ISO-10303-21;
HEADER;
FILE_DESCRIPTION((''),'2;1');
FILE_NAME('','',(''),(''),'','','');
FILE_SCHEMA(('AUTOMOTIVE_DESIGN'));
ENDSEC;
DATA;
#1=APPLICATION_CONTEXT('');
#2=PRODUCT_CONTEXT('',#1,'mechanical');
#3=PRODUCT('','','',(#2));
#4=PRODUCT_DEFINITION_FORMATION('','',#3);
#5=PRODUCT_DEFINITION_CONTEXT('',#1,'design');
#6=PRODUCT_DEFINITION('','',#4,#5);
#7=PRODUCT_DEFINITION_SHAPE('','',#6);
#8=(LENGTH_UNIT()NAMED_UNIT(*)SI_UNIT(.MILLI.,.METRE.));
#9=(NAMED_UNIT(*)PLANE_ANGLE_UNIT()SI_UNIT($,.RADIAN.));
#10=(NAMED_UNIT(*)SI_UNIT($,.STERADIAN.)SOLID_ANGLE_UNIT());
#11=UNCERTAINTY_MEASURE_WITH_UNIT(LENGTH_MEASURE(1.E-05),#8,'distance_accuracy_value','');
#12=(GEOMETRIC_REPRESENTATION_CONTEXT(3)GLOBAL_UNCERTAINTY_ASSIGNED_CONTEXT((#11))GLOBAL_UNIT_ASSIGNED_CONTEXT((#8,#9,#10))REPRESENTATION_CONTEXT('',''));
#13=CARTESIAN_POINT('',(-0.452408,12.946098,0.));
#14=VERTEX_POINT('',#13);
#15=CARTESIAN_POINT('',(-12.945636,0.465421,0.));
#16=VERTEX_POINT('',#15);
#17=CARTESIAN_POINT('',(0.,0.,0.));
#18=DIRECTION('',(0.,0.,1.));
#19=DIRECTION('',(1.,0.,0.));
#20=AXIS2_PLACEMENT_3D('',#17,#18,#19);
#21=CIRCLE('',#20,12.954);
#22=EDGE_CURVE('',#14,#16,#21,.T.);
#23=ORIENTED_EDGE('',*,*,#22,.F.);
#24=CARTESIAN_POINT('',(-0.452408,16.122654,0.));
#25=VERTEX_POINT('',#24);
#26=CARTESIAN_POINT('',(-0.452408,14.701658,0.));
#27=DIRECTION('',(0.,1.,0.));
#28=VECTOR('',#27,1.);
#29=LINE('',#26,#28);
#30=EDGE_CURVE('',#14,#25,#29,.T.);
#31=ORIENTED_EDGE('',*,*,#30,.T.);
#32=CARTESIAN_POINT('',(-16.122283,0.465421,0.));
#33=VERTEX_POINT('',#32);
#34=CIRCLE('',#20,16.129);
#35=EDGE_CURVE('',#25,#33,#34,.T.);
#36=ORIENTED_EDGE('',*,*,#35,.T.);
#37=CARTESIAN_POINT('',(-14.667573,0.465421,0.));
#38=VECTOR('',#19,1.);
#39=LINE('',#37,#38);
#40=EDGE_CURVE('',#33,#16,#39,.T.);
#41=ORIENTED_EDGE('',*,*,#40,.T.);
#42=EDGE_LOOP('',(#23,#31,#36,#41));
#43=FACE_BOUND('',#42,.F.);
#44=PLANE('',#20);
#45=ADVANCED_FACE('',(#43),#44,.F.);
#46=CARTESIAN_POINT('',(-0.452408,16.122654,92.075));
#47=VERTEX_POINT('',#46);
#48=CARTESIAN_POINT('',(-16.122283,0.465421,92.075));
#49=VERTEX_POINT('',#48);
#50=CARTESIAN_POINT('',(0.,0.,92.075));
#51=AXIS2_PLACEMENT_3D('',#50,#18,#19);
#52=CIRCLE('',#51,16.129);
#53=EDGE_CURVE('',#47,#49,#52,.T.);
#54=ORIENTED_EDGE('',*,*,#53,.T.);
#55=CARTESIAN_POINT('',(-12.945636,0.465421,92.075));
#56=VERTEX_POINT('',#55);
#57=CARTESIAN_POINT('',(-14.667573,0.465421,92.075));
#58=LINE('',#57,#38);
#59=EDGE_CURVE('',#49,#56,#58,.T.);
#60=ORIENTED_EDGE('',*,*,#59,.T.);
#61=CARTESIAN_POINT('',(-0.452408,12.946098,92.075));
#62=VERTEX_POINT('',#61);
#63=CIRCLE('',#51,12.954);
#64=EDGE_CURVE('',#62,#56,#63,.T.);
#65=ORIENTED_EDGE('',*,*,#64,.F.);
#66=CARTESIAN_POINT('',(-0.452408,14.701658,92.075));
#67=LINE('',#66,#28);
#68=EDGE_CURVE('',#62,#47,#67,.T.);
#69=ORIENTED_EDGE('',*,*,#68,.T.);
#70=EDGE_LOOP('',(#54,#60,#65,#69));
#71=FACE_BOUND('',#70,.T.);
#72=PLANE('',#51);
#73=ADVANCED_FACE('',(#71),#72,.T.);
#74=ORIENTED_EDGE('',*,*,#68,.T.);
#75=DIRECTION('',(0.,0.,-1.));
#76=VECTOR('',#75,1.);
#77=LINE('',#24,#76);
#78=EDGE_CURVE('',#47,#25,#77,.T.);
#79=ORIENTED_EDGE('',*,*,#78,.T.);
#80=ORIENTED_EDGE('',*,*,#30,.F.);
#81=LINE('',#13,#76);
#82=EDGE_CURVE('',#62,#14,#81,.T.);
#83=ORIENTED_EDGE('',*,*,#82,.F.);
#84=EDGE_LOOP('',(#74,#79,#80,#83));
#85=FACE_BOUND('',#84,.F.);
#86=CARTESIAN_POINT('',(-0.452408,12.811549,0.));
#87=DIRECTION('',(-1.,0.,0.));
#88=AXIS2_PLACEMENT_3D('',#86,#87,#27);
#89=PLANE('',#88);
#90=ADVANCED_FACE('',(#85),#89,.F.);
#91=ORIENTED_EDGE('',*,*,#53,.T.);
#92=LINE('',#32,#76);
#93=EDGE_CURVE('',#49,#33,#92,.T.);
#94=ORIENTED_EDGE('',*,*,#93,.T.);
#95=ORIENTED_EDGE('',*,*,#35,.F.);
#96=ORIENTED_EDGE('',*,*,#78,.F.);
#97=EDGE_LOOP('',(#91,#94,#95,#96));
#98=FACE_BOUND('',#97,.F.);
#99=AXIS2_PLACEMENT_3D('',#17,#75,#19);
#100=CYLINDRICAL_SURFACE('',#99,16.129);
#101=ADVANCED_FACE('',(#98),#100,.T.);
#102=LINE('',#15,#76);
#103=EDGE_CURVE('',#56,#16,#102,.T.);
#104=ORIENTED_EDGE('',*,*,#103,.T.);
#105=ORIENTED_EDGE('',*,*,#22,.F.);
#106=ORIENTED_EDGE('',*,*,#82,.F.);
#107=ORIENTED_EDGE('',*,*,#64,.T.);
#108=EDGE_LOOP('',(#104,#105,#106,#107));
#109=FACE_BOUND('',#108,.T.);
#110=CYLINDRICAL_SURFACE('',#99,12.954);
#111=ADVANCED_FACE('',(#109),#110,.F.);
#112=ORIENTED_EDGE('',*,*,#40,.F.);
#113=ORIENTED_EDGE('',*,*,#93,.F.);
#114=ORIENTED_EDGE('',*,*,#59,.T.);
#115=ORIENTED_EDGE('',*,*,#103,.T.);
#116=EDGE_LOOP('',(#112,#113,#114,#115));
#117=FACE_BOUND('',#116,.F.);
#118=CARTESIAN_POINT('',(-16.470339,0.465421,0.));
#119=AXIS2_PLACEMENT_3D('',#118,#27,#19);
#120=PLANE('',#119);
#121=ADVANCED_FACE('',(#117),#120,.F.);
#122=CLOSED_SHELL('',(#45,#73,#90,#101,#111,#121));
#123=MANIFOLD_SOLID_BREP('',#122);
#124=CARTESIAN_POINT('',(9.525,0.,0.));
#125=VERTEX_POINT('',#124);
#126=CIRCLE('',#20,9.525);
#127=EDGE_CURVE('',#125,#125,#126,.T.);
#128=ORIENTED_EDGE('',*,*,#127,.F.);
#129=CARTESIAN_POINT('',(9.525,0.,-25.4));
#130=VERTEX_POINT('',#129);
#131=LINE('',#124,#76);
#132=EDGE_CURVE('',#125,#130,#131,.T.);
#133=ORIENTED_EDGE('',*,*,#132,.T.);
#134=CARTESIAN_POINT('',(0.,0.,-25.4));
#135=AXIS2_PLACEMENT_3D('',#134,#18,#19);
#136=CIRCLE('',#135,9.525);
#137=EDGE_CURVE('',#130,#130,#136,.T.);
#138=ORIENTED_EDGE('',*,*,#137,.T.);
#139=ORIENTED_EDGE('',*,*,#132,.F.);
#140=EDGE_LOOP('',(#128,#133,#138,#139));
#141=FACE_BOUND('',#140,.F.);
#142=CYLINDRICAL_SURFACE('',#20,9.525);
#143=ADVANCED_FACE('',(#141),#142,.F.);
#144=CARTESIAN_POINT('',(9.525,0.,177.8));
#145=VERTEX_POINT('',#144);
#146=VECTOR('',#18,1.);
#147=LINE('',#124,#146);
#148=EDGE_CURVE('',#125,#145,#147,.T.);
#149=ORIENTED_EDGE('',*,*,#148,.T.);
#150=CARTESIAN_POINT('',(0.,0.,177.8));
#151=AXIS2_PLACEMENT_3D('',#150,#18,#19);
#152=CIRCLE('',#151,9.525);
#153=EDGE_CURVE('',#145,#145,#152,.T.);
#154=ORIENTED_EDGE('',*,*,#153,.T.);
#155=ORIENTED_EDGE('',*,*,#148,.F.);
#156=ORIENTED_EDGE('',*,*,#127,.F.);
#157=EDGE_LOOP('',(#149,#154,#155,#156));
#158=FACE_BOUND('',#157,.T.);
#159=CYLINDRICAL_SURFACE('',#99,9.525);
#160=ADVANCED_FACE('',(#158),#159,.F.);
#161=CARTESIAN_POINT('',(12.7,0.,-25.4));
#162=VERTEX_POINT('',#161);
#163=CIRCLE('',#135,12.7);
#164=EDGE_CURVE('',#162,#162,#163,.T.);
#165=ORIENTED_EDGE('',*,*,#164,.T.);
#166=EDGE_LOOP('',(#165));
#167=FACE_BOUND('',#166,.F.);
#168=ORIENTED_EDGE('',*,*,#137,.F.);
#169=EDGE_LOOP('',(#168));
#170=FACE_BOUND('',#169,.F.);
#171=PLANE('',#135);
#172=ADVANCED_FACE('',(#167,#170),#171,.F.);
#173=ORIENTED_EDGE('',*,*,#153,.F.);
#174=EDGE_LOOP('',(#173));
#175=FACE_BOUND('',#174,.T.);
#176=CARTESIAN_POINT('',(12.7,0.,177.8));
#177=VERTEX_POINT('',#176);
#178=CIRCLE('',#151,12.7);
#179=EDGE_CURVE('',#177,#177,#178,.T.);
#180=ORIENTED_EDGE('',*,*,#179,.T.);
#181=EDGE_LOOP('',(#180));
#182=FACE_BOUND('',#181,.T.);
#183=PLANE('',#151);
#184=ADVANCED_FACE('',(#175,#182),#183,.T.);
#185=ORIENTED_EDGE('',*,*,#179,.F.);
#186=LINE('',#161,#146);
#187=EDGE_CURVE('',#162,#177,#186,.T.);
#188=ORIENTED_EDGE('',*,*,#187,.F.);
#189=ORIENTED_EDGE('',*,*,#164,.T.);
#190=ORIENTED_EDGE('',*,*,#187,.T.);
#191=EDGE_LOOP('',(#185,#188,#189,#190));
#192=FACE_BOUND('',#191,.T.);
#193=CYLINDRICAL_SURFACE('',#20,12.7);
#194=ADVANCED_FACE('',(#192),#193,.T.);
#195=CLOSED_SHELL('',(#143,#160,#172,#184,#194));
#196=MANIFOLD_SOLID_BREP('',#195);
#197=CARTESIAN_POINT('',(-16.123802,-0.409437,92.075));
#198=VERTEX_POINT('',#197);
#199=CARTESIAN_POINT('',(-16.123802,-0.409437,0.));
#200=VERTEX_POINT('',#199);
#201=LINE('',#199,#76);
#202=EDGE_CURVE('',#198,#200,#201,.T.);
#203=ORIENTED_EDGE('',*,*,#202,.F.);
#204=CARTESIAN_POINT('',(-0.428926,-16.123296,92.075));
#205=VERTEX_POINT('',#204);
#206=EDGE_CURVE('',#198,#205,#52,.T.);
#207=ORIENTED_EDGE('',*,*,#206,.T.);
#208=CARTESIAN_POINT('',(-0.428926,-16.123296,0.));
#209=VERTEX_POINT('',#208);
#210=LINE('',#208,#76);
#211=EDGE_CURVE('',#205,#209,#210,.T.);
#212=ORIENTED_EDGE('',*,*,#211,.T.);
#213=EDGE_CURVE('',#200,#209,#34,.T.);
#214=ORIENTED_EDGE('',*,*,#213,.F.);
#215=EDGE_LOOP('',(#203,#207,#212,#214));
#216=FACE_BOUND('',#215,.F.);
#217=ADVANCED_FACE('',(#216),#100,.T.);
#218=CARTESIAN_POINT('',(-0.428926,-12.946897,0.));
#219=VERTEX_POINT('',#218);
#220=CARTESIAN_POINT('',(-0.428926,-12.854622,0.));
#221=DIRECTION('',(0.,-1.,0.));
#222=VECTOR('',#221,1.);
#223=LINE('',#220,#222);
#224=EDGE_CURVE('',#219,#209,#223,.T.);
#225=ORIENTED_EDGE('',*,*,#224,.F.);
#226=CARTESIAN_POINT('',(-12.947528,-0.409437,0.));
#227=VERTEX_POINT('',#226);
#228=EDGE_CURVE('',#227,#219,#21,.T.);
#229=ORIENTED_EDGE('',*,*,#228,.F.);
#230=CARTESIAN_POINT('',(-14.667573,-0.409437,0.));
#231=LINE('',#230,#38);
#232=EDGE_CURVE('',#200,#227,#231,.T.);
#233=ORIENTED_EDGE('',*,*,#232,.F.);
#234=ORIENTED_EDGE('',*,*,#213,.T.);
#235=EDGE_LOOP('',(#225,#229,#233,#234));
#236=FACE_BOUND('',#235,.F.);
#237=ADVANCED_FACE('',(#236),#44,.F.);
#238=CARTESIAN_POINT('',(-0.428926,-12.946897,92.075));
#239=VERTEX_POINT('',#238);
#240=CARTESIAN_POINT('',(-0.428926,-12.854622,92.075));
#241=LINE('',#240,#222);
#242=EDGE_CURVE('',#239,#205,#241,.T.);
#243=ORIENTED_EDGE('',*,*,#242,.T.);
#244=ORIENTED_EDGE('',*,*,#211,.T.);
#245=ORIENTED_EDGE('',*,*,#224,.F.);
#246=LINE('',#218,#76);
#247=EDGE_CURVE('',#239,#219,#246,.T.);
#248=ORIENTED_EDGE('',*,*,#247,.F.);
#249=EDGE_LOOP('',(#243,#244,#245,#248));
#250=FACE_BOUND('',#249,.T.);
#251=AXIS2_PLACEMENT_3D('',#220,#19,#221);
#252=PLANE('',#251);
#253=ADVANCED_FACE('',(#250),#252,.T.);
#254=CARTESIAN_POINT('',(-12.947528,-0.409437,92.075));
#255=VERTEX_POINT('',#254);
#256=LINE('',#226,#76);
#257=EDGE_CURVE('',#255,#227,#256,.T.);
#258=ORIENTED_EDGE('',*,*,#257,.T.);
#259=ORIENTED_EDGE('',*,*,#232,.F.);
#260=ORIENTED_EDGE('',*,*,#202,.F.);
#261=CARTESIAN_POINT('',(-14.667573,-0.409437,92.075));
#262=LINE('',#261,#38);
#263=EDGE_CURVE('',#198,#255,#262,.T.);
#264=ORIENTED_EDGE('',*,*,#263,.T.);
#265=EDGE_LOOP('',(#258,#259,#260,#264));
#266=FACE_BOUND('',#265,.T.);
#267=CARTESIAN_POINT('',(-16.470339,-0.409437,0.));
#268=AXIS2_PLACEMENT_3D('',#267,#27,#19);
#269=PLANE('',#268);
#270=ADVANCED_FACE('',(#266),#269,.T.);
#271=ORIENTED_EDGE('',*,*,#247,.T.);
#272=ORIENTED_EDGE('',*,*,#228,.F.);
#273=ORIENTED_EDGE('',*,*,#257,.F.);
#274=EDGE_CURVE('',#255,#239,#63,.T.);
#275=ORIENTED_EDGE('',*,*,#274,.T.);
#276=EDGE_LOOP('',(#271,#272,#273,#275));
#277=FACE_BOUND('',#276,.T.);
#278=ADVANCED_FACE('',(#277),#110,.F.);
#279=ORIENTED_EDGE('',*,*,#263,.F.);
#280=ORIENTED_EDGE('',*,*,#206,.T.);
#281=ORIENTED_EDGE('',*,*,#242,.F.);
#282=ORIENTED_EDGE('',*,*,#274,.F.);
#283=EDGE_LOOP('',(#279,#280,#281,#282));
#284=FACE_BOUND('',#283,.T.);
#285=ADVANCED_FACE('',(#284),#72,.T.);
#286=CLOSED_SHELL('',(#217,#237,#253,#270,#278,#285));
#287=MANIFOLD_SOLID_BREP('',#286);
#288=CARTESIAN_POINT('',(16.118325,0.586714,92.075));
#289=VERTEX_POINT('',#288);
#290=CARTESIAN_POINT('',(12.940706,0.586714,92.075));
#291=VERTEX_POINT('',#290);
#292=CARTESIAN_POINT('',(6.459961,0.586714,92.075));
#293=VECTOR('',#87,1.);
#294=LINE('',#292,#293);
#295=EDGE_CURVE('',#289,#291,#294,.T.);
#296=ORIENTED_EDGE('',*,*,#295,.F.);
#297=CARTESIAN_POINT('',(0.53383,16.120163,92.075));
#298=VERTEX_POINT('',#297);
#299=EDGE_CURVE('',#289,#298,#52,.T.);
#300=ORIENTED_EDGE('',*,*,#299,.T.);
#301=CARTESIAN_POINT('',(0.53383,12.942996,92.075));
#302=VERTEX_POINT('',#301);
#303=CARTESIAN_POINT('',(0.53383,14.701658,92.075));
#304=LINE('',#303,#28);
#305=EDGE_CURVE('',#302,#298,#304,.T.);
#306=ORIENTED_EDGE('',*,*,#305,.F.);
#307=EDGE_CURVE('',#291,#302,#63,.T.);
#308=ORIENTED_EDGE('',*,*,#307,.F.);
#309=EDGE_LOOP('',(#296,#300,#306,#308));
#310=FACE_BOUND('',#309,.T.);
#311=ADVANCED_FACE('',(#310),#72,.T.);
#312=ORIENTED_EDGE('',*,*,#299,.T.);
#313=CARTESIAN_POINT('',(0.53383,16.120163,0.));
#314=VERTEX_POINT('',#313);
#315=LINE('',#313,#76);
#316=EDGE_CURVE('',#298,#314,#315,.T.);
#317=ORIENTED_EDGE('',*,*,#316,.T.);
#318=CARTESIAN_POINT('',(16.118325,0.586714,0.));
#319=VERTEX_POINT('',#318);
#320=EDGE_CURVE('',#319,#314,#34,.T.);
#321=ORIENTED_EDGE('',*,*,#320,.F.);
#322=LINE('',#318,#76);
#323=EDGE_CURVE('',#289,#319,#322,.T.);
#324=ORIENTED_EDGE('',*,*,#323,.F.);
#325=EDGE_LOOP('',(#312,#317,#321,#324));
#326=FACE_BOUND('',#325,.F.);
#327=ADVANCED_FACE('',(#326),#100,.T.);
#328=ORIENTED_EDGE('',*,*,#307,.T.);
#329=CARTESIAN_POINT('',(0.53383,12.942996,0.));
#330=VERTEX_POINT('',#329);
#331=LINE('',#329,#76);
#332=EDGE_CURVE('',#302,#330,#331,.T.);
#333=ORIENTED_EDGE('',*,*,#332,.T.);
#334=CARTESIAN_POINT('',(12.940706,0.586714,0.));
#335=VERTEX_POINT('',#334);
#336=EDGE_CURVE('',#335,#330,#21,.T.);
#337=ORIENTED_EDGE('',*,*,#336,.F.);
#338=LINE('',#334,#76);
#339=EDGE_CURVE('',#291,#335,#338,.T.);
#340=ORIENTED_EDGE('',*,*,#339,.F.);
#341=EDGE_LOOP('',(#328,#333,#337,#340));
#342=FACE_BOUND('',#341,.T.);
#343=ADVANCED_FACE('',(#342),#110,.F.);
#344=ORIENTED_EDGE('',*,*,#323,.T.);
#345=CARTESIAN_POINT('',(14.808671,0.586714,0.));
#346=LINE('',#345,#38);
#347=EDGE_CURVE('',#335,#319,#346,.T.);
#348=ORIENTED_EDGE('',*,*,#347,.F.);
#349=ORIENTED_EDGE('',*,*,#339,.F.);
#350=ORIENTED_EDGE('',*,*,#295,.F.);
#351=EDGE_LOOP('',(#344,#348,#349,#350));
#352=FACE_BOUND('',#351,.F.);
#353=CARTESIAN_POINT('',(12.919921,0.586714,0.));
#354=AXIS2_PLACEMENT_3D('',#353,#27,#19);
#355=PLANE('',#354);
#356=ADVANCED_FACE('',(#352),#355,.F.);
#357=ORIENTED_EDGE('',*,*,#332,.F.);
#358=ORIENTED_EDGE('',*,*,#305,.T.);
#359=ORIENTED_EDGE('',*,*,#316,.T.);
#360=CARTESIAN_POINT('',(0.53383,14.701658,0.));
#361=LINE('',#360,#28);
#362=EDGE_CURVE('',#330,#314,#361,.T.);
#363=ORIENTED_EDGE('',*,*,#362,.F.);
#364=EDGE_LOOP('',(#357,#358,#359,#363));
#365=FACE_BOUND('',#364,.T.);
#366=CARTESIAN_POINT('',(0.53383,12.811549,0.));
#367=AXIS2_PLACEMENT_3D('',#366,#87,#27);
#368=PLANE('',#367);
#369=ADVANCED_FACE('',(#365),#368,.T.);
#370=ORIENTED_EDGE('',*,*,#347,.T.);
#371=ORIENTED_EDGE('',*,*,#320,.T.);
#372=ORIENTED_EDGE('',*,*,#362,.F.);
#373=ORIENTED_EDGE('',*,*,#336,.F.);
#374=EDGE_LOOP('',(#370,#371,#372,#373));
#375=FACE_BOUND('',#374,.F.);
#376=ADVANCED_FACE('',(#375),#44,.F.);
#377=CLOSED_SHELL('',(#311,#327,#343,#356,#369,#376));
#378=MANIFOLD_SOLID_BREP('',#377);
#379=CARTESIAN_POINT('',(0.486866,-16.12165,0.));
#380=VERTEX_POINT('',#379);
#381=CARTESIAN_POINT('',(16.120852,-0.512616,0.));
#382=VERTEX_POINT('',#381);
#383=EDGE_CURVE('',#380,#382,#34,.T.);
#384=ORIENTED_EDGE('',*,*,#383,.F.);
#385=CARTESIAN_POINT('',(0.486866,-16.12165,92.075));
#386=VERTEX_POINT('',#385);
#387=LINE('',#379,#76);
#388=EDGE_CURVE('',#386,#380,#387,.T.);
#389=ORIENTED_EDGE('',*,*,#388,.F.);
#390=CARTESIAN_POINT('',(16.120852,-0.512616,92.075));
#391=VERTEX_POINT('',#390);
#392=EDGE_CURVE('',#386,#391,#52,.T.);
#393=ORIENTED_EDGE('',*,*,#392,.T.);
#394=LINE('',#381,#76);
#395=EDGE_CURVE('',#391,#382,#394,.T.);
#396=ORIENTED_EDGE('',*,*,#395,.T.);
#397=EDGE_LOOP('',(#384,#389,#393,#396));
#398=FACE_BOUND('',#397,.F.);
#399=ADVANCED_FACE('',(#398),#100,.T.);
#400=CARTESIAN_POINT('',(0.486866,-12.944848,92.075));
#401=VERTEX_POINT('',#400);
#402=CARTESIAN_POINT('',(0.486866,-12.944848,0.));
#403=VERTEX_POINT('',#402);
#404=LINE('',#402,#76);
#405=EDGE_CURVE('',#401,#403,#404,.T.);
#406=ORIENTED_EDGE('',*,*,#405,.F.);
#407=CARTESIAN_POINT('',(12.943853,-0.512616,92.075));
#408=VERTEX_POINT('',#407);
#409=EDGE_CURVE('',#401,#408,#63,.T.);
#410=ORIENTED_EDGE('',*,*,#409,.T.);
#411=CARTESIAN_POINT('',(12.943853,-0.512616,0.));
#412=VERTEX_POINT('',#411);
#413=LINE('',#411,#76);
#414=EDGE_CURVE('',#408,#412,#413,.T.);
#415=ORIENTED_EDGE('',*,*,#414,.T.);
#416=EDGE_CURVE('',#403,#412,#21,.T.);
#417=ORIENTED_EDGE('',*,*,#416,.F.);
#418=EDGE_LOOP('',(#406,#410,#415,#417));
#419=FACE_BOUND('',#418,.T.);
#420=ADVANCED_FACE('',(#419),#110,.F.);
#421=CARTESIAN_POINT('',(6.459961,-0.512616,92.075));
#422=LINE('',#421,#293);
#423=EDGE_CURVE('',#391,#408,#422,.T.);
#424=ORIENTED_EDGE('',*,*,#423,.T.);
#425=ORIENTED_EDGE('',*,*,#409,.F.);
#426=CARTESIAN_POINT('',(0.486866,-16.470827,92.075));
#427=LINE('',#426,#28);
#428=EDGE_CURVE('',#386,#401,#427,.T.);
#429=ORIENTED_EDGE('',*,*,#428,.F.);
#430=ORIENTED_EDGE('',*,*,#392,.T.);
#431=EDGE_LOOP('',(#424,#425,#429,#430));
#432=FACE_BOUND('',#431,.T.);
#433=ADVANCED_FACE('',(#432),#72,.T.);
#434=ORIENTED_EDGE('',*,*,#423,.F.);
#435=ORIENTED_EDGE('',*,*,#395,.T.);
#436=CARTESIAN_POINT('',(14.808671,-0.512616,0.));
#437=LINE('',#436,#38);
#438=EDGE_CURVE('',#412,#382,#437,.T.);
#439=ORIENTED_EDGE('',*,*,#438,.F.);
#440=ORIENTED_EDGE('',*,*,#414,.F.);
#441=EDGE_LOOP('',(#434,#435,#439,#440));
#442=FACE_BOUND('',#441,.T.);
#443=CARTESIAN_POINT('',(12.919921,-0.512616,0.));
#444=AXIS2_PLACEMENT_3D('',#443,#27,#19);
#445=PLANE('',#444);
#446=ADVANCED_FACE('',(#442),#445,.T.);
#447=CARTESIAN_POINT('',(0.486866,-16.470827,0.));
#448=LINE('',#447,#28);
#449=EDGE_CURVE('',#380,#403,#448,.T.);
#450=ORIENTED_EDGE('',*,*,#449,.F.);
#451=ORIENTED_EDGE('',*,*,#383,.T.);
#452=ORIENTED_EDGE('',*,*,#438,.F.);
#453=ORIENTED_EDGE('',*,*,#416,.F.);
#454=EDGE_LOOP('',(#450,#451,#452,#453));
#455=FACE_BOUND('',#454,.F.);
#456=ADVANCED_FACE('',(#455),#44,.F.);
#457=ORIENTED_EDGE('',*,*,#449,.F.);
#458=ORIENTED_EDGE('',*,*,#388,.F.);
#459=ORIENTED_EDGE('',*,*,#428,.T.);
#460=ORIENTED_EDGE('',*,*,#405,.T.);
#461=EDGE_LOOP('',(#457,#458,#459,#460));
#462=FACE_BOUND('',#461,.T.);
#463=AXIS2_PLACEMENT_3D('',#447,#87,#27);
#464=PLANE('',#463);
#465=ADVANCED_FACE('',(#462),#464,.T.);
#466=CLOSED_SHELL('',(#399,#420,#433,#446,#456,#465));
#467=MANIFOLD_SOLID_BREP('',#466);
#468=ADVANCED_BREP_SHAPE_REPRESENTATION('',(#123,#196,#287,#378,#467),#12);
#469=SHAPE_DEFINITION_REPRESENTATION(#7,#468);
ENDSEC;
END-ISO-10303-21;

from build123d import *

# Parameters (mm, degrees)
F0_R     = 12.7
F0_R_2   = 9.525
F1_DEPTH = 177.8
F2_R     = 16.129
F2_R_2   = 12.954
F3_DEPTH = 92.075
F4_W     = 3.7774993107
F4_H     = 1.0993301403
F5_DEPTH = 177.801
F6_W     = 3.6055315286
F6_H     = 0.8748579712
F6_W_2   = 0.9862377919
F6_H_2   = 3.7802174482
F7_DEPTH = 92.075
F8_DEPTH = 25.4


# Not quite as in the source:
# - a feature names something its author has since deleted; it is built from what else it names


with BuildPart() as f1:
    # F0 (on Top) → F1 (new body)
    with BuildSketch(Plane.XY):
        Circle(F0_R)
        Circle(F0_R_2, mode=Mode.SUBTRACT)
    extrude(amount=F1_DEPTH)

    # F8 (add): a face of the model
    f8_faces = [f1.faces().sort_by_distance(p)[0] for p in [
        (-12.3407897552, 0, 0),
    ]]
    extrude(f8_faces, amount=F8_DEPTH)


with BuildPart() as f3:
    # F2 (on Top) → F3 (new body)
    with BuildSketch(Plane.XY):
        Circle(F2_R)
        Circle(F2_R_2, mode=Mode.SUBTRACT)
    extrude(amount=F3_DEPTH)

    # F4 (on Top) → F5 (cut, through all)
    with BuildSketch(Plane.XY):
        with Locations((14.8086710833, 0.0370488851)):
            Rectangle(F4_W, F4_H)
    extrude(amount=F5_DEPTH, mode=Mode.SUBTRACT)

    # F6 (on Top) → F7 (cut, through all)
    with BuildSketch(Plane.XY):
        with Locations((-14.6675733849, 0.0279923697)):
            Rectangle(F6_W, F6_H)
        Polygon((0.4868659598, -12.8129947375), (-0.4289262579, -12.8546217456), (-0.4289262579, -16.4708271623), (0.4868659598, -16.4708271623), align=None)
        with Locations((0.0407108382, 14.701657732)):
            Rectangle(F6_W_2, F6_H_2)
    extrude(amount=F7_DEPTH, mode=Mode.SUBTRACT)


solid = Compound([f1.part, f3.part])
